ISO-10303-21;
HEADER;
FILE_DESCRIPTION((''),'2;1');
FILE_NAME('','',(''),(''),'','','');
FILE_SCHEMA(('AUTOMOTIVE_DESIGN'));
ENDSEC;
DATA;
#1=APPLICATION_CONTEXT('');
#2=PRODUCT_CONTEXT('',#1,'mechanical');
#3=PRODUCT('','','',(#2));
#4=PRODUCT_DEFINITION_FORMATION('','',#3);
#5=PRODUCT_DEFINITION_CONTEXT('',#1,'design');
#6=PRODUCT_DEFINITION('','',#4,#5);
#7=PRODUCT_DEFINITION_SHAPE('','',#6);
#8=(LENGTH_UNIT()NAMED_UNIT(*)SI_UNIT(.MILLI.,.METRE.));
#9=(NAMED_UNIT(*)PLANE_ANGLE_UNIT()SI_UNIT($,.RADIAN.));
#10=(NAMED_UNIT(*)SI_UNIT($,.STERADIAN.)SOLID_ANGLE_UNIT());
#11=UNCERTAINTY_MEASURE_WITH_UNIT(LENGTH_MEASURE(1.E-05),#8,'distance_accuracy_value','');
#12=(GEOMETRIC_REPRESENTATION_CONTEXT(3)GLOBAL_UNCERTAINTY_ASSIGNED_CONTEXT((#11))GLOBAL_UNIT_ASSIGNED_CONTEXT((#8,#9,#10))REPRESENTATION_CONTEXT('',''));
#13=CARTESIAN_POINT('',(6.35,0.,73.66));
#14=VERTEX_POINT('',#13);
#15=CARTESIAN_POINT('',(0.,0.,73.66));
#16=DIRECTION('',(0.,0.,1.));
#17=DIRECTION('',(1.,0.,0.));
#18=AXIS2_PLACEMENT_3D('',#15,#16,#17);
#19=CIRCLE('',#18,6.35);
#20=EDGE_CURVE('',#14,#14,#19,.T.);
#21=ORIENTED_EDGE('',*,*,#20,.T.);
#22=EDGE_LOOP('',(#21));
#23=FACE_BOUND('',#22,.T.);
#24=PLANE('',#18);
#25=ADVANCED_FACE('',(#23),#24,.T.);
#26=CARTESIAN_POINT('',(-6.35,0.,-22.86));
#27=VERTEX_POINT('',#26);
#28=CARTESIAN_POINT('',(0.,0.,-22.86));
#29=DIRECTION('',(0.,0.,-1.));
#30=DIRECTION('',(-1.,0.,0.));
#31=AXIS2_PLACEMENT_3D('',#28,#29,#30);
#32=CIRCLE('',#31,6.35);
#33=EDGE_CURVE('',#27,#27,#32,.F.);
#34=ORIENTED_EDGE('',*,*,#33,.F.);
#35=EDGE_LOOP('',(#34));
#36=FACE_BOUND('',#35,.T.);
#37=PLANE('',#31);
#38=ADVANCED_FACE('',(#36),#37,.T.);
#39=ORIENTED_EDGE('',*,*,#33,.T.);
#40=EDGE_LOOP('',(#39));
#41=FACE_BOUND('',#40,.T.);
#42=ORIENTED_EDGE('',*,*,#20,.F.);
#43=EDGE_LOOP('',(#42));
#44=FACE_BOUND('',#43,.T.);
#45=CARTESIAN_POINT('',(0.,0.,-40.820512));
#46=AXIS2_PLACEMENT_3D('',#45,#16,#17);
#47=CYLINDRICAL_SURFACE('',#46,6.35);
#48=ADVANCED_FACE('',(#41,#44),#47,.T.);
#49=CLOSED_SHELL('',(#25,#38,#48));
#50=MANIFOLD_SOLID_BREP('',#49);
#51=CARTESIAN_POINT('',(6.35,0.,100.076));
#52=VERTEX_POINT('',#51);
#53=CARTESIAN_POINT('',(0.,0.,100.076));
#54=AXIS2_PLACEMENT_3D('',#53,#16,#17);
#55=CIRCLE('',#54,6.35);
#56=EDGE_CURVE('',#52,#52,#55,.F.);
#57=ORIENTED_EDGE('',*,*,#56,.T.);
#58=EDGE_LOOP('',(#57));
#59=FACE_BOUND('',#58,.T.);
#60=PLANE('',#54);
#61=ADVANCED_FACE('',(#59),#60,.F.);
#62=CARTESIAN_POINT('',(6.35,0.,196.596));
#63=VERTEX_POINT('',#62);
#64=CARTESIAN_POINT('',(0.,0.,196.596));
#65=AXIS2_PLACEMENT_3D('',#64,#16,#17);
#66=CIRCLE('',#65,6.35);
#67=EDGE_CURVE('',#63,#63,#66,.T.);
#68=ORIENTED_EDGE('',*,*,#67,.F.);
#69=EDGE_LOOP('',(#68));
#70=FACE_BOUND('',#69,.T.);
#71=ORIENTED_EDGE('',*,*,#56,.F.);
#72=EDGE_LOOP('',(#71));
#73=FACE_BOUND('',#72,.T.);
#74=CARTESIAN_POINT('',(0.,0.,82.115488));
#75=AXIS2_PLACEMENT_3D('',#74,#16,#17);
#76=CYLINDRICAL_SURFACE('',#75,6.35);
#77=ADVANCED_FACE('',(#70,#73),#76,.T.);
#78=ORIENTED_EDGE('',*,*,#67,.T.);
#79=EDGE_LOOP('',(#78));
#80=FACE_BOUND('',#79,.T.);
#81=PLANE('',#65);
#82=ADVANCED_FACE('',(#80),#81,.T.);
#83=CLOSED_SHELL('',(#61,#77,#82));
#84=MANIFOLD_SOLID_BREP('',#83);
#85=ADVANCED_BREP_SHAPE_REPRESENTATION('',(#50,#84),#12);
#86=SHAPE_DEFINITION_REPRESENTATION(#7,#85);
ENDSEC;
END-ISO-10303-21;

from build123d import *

# Parameters (mm, degrees)
BOSS_EXTRUDE1_START     = -96.52
BOSS_EXTRUDE1_OUTLINE_R = 6.35
BOSS_EXTRUDE1_DEPTH     = 96.52
SKETCH3_R               = 6.35
BOSS_EXTRUDE2_DEPTH     = 96.52


# Read off the part's stored shape, not the designer's step: Boss-Extrude1
with BuildPart() as part:
    # Boss-Extrude1 outline → Boss-Extrude1 (new body)
    with BuildSketch(Plane.XY.offset(196.596).offset(BOSS_EXTRUDE1_START)):
        Circle(BOSS_EXTRUDE1_OUTLINE_R)
    extrude(amount=BOSS_EXTRUDE1_DEPTH)


with BuildPart() as body_2:
    # Sketch3 → Boss-Extrude2 (new body)
    with BuildSketch(Plane.XY.offset(73.66)):
        Circle(SKETCH3_R)
    extrude(amount=-BOSS_EXTRUDE2_DEPTH)


solid = Compound([part.part, body_2.part])
